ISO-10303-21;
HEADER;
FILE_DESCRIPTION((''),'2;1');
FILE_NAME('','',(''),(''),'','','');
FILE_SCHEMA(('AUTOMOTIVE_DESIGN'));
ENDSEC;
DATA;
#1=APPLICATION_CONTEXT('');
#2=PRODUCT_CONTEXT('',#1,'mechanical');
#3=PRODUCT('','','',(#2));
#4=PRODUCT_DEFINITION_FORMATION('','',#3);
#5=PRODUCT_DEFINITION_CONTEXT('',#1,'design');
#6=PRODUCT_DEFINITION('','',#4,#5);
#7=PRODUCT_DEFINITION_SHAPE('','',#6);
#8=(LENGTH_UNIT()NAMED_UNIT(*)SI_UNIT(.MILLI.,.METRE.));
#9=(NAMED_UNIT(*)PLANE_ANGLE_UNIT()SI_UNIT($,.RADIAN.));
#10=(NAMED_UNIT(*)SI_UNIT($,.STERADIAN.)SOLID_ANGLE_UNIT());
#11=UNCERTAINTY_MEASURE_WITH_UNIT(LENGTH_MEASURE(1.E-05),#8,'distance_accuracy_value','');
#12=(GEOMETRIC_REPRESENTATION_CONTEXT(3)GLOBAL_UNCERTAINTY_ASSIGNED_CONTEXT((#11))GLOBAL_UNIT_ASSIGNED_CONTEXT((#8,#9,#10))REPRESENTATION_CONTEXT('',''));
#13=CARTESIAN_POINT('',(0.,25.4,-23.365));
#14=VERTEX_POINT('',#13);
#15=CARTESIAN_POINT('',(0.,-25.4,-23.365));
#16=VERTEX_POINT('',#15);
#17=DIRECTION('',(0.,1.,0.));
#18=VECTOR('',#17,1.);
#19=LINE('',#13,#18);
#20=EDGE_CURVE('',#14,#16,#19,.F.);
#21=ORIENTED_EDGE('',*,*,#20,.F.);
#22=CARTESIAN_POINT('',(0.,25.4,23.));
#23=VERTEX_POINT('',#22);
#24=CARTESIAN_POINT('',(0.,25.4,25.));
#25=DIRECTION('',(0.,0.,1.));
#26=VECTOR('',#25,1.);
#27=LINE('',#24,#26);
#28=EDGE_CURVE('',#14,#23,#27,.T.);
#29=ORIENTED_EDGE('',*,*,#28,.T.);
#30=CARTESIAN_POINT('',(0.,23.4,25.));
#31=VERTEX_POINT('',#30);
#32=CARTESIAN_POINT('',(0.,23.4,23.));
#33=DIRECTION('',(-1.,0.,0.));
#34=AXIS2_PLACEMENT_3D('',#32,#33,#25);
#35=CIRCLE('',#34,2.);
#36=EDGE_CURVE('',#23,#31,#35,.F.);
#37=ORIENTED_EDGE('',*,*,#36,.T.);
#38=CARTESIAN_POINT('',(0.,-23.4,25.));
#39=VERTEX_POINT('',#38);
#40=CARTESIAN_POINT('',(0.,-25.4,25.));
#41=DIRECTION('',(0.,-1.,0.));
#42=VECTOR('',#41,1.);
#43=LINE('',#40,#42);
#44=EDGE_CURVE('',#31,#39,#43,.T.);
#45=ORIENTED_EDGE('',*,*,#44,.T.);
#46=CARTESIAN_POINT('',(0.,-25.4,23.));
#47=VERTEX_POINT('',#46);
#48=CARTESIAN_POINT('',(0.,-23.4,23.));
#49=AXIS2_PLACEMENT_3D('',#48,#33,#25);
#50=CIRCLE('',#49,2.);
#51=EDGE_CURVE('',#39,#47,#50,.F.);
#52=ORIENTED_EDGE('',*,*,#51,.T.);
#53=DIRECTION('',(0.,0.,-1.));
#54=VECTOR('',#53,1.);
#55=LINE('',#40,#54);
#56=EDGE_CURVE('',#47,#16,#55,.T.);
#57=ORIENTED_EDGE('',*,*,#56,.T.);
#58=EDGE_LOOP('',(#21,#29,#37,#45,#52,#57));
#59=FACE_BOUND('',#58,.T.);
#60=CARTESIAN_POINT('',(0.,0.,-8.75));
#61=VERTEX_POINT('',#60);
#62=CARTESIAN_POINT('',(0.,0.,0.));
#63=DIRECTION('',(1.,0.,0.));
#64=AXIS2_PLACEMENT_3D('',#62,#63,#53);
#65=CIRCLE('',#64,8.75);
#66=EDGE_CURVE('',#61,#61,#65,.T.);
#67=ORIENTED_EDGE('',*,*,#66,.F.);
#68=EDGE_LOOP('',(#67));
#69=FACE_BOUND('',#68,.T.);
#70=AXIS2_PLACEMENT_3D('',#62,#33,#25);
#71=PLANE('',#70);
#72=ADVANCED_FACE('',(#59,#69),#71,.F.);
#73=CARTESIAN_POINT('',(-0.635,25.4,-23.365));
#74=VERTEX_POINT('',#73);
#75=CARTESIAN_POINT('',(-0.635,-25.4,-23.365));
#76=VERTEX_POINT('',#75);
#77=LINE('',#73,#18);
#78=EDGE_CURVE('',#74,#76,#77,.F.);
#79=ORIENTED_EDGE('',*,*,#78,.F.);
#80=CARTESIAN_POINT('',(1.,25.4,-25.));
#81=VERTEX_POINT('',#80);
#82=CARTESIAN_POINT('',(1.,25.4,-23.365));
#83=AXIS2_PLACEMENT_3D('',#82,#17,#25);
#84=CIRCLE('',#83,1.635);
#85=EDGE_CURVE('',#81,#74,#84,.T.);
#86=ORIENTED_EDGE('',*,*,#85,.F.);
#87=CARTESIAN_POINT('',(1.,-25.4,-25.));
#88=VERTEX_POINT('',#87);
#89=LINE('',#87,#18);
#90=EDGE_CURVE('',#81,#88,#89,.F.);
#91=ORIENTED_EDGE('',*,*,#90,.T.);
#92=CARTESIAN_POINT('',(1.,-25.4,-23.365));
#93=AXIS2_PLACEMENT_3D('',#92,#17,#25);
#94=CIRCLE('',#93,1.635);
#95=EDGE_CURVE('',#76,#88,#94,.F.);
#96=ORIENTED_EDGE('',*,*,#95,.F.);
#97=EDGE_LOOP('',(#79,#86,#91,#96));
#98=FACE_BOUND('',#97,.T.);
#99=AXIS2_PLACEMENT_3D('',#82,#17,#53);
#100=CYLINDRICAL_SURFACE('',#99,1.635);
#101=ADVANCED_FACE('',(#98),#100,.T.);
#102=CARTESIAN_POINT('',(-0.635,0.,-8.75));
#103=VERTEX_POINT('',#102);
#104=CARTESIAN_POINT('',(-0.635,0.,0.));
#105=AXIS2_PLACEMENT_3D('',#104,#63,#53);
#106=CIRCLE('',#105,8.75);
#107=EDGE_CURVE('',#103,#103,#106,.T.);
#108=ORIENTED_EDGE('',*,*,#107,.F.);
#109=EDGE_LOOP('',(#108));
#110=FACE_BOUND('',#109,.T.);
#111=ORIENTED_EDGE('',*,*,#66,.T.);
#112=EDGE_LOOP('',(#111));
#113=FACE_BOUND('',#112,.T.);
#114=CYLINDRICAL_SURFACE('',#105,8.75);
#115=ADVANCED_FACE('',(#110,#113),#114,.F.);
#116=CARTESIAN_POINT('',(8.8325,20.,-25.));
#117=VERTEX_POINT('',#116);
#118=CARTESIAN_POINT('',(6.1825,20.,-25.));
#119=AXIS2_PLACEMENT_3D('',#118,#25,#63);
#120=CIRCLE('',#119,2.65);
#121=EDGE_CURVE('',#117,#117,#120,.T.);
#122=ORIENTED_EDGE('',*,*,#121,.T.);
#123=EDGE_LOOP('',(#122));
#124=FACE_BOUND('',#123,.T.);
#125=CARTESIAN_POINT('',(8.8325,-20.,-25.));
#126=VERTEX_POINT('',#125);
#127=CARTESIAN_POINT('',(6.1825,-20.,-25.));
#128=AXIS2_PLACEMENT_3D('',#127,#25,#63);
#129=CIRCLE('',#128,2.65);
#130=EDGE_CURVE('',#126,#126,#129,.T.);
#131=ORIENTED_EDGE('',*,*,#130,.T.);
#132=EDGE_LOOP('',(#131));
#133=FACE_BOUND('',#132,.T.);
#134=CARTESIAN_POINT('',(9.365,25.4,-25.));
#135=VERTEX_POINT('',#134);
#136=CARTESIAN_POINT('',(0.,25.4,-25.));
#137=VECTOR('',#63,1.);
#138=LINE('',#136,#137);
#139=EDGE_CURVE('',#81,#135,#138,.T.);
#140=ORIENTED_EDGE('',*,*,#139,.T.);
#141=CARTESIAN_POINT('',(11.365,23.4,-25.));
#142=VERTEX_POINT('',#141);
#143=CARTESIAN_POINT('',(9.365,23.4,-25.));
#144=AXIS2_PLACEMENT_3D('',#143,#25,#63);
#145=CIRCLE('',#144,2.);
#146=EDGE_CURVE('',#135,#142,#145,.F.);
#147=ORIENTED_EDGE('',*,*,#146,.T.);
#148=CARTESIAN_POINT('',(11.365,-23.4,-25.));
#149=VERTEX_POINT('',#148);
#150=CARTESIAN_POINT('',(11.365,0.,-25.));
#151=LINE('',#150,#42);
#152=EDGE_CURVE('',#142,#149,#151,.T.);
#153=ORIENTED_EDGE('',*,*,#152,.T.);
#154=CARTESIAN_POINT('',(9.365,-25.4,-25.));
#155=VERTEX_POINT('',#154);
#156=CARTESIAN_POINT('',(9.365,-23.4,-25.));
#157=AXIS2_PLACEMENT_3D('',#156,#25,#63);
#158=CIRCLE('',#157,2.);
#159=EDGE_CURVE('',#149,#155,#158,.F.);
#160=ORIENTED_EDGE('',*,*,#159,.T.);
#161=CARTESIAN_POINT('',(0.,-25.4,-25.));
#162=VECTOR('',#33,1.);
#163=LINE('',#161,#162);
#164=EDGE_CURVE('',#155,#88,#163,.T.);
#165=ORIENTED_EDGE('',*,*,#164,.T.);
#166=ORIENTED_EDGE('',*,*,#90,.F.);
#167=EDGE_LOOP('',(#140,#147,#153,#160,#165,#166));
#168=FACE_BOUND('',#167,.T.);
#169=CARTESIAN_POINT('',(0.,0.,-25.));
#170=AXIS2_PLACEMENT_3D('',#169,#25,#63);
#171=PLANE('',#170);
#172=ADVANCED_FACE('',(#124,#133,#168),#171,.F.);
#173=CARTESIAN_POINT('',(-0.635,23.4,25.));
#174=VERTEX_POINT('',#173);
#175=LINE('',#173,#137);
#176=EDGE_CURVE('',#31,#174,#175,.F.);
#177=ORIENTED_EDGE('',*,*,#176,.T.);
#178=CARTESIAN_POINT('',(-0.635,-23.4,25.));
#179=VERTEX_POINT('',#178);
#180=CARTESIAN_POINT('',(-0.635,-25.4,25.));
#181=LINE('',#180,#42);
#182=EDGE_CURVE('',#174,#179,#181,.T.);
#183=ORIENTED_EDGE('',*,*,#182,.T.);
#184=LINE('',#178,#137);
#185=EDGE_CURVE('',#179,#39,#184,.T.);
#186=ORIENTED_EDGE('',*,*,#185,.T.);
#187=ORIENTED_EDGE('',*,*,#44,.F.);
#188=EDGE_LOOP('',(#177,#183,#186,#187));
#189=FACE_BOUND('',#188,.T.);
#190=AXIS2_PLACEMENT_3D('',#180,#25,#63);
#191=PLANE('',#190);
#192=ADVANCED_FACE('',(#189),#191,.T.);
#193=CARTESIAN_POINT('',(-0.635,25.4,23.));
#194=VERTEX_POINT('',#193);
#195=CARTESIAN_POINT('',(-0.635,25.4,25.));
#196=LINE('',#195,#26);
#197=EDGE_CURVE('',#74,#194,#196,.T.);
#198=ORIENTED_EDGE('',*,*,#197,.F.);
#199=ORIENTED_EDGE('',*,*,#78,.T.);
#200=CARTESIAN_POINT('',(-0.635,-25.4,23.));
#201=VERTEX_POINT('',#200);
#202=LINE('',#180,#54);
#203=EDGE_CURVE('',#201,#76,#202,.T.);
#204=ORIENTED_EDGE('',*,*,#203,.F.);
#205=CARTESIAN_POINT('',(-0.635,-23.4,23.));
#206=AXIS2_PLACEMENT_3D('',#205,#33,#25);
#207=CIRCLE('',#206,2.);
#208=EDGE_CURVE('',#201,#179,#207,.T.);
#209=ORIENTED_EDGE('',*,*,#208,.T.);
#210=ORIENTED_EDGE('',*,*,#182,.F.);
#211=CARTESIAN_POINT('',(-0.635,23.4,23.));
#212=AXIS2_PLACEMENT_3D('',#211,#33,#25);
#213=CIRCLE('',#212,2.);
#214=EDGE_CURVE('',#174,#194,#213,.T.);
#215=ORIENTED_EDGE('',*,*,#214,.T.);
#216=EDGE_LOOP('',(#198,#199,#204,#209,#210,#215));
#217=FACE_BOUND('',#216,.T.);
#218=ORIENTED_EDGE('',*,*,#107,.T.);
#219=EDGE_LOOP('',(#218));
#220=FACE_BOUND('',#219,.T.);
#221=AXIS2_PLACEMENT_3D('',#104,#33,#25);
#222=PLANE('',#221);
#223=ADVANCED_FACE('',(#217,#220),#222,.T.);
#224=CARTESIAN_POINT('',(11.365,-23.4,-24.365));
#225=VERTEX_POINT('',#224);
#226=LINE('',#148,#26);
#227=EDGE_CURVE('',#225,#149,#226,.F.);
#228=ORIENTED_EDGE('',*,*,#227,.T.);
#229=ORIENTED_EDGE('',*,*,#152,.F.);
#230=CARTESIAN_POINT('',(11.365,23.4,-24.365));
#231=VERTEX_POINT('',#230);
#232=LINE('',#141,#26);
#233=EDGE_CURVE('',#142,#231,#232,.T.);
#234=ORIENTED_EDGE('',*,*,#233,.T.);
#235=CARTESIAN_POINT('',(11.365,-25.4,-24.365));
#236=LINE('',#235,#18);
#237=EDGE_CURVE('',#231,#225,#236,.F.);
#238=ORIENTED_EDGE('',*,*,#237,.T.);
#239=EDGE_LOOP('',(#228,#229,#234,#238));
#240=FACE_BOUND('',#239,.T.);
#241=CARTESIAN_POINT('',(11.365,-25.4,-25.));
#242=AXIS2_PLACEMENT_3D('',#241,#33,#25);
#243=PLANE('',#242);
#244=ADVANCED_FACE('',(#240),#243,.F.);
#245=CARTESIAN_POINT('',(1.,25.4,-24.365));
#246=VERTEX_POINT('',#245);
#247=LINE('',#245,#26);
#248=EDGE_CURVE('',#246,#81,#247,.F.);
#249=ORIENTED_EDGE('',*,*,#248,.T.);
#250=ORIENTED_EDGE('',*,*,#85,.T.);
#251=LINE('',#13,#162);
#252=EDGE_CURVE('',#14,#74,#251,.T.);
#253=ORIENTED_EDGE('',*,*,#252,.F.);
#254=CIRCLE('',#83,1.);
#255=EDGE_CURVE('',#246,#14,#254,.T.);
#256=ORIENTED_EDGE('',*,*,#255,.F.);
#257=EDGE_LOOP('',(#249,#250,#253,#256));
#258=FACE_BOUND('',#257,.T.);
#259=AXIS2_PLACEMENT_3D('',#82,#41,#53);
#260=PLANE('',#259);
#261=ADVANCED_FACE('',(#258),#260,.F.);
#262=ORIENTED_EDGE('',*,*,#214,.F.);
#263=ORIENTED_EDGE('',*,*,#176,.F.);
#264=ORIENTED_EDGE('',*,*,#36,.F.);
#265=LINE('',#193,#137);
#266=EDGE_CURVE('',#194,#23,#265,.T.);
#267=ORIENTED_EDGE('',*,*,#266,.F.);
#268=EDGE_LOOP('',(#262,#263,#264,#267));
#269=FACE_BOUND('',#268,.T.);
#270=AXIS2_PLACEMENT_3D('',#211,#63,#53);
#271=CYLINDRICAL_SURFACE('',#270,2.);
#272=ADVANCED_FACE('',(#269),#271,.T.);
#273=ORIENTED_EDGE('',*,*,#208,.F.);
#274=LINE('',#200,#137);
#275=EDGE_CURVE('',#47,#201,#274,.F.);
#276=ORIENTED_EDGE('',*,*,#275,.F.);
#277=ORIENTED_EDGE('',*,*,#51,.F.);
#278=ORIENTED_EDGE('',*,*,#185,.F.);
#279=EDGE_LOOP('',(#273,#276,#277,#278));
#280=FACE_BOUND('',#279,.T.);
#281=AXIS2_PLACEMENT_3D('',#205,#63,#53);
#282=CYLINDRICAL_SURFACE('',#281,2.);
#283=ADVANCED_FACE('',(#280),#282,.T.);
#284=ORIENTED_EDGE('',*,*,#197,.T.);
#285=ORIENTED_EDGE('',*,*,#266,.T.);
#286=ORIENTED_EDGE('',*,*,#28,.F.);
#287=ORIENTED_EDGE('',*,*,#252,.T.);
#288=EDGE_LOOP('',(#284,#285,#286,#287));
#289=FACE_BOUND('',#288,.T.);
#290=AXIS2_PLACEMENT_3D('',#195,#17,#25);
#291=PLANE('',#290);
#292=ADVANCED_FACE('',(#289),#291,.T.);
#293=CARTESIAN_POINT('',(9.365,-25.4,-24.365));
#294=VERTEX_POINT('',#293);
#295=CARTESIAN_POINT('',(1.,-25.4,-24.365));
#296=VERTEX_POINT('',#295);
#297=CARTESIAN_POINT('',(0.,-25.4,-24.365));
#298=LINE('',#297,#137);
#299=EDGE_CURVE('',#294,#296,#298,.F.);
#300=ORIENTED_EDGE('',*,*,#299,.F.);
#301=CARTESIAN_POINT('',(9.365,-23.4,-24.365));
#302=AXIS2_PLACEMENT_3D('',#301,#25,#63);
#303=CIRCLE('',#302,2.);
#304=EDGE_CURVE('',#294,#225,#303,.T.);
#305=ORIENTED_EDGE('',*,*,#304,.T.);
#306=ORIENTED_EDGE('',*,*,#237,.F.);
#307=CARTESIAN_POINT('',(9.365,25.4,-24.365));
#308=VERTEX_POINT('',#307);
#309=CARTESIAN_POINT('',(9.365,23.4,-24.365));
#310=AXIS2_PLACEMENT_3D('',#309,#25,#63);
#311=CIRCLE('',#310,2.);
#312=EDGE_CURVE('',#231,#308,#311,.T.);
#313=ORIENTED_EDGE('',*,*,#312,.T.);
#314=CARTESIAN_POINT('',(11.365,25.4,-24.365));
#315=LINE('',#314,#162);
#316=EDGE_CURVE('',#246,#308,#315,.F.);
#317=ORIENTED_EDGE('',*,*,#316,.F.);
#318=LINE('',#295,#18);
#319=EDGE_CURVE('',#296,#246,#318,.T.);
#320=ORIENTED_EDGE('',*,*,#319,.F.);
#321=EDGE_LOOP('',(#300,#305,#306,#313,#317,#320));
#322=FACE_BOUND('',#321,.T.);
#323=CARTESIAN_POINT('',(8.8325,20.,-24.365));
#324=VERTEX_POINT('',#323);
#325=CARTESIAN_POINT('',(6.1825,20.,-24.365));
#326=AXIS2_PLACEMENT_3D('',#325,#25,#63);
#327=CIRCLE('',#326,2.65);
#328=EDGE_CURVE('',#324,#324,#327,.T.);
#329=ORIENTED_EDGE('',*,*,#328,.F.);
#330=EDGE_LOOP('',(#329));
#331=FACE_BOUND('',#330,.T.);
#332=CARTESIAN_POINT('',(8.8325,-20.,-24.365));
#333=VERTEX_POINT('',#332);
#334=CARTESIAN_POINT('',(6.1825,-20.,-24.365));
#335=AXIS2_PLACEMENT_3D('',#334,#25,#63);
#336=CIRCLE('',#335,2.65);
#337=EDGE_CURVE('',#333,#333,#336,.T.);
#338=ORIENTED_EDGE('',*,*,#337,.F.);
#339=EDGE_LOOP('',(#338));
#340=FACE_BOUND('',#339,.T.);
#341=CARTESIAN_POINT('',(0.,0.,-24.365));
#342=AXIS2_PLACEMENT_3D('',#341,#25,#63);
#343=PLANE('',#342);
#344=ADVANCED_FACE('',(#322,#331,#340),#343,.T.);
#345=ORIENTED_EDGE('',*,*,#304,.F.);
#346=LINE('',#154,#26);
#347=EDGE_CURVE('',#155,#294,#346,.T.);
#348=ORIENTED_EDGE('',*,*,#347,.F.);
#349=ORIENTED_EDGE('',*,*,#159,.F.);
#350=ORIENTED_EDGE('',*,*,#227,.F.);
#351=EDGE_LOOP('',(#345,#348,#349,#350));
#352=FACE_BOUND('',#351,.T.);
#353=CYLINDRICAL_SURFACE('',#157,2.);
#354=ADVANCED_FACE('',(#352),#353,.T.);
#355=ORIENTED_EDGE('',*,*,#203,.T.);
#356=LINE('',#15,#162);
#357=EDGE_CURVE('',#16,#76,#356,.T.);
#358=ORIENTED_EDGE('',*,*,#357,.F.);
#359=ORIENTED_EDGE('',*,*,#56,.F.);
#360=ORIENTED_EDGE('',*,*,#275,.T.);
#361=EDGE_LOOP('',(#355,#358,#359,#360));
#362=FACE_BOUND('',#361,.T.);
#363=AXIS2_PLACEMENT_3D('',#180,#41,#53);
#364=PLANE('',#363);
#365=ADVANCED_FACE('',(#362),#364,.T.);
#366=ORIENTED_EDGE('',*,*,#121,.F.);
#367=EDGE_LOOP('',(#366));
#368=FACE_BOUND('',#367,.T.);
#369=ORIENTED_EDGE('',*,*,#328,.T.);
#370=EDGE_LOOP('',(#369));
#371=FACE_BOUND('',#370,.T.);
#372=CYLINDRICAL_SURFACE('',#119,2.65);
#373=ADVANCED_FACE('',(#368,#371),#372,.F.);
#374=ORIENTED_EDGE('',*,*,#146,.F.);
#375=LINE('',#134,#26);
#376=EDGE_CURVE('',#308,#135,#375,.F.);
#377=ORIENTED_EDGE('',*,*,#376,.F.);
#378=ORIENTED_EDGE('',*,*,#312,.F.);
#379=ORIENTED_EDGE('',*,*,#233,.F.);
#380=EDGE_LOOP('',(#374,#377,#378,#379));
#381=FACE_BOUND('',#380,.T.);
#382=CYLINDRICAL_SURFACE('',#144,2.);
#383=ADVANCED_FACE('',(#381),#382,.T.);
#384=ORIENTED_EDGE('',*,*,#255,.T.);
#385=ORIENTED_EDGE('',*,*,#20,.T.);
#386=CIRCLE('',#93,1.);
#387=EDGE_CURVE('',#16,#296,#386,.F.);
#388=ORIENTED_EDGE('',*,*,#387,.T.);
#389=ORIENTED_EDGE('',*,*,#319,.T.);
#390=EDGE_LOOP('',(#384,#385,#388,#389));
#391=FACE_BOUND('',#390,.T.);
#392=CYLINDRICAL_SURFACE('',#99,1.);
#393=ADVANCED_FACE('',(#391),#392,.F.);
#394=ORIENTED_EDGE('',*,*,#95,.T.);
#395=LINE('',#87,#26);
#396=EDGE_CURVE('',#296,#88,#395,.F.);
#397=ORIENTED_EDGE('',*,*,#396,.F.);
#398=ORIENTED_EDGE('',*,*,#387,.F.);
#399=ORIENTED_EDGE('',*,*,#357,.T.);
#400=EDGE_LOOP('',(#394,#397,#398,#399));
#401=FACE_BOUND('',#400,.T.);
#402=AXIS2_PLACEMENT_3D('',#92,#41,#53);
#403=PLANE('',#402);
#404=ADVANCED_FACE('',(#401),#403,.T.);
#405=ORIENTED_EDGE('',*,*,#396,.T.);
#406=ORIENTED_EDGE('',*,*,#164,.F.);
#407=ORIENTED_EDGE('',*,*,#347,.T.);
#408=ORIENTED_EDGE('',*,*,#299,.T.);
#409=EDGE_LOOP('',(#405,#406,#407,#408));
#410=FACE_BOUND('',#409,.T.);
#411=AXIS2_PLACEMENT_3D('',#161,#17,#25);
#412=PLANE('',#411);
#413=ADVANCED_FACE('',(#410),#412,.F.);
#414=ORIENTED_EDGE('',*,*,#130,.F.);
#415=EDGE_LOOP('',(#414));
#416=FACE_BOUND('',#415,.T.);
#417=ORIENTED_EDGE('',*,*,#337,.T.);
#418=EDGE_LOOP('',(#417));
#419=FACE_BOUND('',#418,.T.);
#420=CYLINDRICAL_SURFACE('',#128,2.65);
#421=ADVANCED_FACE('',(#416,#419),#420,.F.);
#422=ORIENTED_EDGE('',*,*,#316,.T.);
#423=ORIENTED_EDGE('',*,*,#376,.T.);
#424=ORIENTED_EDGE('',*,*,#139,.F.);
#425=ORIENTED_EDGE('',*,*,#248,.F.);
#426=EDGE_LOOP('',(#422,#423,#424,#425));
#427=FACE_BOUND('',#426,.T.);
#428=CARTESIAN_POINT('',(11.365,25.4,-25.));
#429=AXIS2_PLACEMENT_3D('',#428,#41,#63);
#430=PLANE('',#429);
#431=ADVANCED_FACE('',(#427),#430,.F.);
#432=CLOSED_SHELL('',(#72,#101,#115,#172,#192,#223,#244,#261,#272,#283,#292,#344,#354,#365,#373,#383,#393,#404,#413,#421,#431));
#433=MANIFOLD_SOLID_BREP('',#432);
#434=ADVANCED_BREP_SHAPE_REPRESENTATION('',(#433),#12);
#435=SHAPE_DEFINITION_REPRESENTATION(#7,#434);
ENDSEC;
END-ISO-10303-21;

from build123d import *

# Parameters (mm, degrees)
SKETCH1_W                    = 50
SKETCH1_H                    = 50.8
BASE_FLANGE1_DEPTH           = 0.635
SKETCH9_R                    = 8.75
CUT_EXTRUDE1_DEPTH           = 36.644960724
EDGE_FLANGE1_STRIP_W         = 4.54
EDGE_FLANGE1_STRIP_H         = 0.635
EDGE_FLANGE1_STRIP_CUT_DEPTH = 50.8
EDGE_FLANGE1_DEPTH           = 50.8
SKETCH13_R                   = 2.65
CUT_EXTRUDE2_DEPTH           = 57.667684354
FILLET1_R                    = 2


# Sheet-metal steps are written as plain solids
with BuildPart() as part:
    # Sketch1 → Base-Flange1 (new body)
    with BuildSketch(Plane(origin=(0, 0, 0), x_dir=(0, 0, -1), z_dir=(1, 0, 0))):
        Rectangle(SKETCH1_W, SKETCH1_H)
    extrude(amount=-BASE_FLANGE1_DEPTH)

    # Sketch9 → Cut-Extrude1 (cut, through all)
    with BuildSketch(Plane(origin=(0, 0, 0), x_dir=(0, 0, -1), z_dir=(1, 0, 0))):
        Circle(SKETCH9_R)
    extrude(amount=-CUT_EXTRUDE1_DEPTH, mode=Mode.SUBTRACT)

    # Edge-Flange1 strip (across the edge) → Edge-Flange1 strip cut (cut)
    with BuildSketch(Plane(origin=(0, -25.4, -25), x_dir=(0, 0, 1), z_dir=(0, 1, 0))):
        with Locations((-0.635, -0.3175)):
            Rectangle(EDGE_FLANGE1_STRIP_W, EDGE_FLANGE1_STRIP_H)
    extrude(amount=EDGE_FLANGE1_STRIP_CUT_DEPTH, mode=Mode.SUBTRACT)

    # Edge-Flange1 section (across the edge) → Edge-Flange1 (add)
    with BuildSketch(Plane(origin=(0, -25.4, -25), x_dir=(0, 0, 1), z_dir=(0, 1, 0))):
        with BuildLine():
            Line((0, 1), (0, 11.365))
            Line((0, 11.365), (0.635, 11.365))
            Line((0.635, 11.365), (0.635, 1))
            ThreePointArc((0.635, 1), (0.927893219, 0.292893219), (1.635, 0))
            Line((1.635, 0), (1.635, -0.635))
            ThreePointArc((1.635, -0.635), (0.478880413, -0.156119587), (0, 1))
        make_face()
    extrude(amount=EDGE_FLANGE1_DEPTH)

    # Sketch13 → Cut-Extrude2 (cut, through all)
    with BuildSketch(Plane.XY.offset(-24.365)):
        with Locations((6.1825, -20)):
            Circle(SKETCH13_R)
        with Locations((6.1825, 20)):
            Circle(SKETCH13_R)
    extrude(amount=-CUT_EXTRUDE2_DEPTH, mode=Mode.SUBTRACT)

    # Fillet1
    fillet1_edges = [part.edges().sort_by_distance(p)[0] for p in [
        (11.365, -25.4, -24.6825),
        (11.365, 25.4, -24.6825),
        (-0.3175, -25.4, 25),
        (-0.3175, 25.4, 25),
    ]]
    fillet(fillet1_edges, radius=FILLET1_R)


solid = part.part
